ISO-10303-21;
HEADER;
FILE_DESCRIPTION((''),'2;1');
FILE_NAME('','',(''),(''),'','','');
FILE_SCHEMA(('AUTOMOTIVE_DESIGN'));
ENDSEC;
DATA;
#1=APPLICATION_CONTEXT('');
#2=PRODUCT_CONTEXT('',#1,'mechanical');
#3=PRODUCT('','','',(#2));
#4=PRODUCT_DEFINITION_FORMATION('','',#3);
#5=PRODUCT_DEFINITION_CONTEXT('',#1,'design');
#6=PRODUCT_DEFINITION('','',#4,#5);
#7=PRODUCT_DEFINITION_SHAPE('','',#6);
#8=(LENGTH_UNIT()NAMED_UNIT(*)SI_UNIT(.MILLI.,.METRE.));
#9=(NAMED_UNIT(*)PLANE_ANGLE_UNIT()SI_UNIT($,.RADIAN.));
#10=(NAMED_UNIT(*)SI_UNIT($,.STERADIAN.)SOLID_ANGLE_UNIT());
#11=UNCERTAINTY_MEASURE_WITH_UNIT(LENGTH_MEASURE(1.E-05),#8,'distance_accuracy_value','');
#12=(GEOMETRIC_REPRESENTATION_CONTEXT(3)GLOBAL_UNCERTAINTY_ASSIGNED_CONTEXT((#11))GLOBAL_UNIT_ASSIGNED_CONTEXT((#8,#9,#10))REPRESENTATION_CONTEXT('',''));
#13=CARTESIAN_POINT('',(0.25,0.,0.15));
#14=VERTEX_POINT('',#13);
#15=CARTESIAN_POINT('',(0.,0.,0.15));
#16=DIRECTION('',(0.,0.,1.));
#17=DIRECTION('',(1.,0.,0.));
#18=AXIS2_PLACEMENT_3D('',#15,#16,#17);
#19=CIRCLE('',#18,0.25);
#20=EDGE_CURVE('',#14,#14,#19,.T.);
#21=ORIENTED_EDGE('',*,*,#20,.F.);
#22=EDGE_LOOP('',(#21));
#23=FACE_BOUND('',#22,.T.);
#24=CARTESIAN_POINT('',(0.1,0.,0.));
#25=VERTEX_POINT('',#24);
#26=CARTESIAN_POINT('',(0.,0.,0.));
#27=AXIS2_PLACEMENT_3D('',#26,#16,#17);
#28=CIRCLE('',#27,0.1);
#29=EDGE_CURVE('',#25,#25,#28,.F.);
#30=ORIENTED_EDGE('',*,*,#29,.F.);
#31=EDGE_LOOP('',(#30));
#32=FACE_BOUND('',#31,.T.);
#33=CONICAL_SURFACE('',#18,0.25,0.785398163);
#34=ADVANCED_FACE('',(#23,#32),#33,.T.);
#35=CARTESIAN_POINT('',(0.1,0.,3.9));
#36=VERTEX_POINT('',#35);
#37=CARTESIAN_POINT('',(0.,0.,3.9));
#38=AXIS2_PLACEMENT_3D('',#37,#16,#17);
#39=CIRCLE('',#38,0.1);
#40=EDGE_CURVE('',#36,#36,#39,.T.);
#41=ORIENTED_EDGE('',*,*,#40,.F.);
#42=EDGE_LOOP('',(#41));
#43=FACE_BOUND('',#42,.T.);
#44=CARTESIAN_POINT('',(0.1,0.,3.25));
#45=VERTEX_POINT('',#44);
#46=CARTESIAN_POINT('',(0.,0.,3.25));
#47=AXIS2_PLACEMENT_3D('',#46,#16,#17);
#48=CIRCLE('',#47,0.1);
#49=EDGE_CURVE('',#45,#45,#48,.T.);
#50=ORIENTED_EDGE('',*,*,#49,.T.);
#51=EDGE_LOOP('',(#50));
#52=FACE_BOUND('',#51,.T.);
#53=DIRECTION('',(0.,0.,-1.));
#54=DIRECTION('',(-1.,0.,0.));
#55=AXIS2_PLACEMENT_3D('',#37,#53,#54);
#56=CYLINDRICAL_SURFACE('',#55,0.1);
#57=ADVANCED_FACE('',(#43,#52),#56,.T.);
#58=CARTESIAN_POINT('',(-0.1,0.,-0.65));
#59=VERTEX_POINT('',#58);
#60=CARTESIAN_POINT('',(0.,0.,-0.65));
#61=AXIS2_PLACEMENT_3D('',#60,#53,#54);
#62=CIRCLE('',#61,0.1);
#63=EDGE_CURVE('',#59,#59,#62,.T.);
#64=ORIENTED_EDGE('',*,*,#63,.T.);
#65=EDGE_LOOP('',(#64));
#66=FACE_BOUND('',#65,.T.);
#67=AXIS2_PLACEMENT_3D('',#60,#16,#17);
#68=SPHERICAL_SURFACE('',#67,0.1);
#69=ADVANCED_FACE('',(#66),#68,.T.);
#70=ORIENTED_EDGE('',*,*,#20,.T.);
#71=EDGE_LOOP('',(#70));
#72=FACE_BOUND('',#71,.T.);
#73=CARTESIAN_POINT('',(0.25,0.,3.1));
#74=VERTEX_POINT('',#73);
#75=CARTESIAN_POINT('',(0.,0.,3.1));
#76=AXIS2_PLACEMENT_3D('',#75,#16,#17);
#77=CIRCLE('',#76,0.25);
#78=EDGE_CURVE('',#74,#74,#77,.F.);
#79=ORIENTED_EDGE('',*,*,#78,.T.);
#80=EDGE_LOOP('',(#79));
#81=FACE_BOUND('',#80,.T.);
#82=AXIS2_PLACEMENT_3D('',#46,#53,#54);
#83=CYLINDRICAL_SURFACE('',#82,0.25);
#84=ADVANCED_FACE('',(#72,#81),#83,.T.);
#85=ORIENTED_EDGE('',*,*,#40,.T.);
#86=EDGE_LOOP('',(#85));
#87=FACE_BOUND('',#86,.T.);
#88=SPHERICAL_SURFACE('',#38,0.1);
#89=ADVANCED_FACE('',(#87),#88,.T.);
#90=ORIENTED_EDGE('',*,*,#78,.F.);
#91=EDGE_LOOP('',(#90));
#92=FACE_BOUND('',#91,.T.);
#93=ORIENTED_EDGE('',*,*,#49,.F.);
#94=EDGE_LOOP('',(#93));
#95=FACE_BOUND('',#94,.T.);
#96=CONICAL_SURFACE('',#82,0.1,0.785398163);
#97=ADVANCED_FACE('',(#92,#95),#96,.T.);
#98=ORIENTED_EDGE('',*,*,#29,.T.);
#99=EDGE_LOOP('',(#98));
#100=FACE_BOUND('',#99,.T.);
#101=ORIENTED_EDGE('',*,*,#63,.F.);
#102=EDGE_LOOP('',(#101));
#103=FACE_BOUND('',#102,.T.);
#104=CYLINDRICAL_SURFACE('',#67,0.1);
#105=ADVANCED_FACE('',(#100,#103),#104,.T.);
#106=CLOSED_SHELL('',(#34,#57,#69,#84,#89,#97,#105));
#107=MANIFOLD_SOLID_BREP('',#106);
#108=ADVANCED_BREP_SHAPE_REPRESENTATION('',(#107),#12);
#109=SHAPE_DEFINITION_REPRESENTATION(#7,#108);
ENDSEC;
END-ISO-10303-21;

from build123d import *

# Parameters (mm, degrees)
CROQUIS1_R              = 0.25
SALIENTE_EXTRUIR1_DEPTH = 3.25
CROQUIS2_R              = 0.1
SALIENTE_EXTRUIR2_DEPTH = 0.65
SALIENTE_EXTRUIR3_START = 0.65
CROQUIS3_R              = 0.1
SALIENTE_EXTRUIR3_DEPTH = 0.65
C_PULA1_FACE_RADIUS     = 0.1
C_PULA1_HEIGHT          = 0.1
CHAFL_N2_SIZE           = 0.15


# Read off the part's stored shape, not the designer's step: Cúpula2
with BuildPart() as part:
    # Croquis1 → Saliente-Extruir1 (new body)
    with BuildSketch(Plane.XY):
        Circle(CROQUIS1_R)
    extrude(amount=SALIENTE_EXTRUIR1_DEPTH)

    # Croquis2 → Saliente-Extruir2 (add)
    with BuildSketch(Plane(origin=(0, 0, 0), x_dir=(-1, 0, 0), z_dir=(0, 0, -1))):
        with Locations(Location((0, 0, 0), (0, 0, 180))):
            Circle(CROQUIS2_R)
    extrude(amount=SALIENTE_EXTRUIR2_DEPTH)

    # Croquis3 → Saliente-Extruir3 (add)
    with BuildSketch(Plane.XY.offset(3.25).offset(SALIENTE_EXTRUIR3_START)):
        Circle(CROQUIS3_R)
    extrude(amount=-SALIENTE_EXTRUIR3_DEPTH)

    # Cúpula1: an elliptical dome of height H over a round flat face of radius A is half a spheroid: the quarter ellipse of half axes A and H revolved about the face's axis
    with BuildSketch(Plane((0, 0, -0.65), x_dir=(0, -1, 0), z_dir=(1, 0, 0)), mode=Mode.PRIVATE) as c_pula1_quarter:
        Ellipse(C_PULA1_FACE_RADIUS, C_PULA1_HEIGHT)
        Rectangle(C_PULA1_FACE_RADIUS, C_PULA1_HEIGHT, align=(Align.MIN, Align.MIN), mode=Mode.INTERSECT)
    revolve(c_pula1_quarter.sketch, axis=Axis((0, 0, -0.65), (0, 0, -1)))

    # Cúpula2 outline → Cúpula2 (revolve)
    with BuildSketch(Plane.XZ):
        with BuildLine():
            Line((0, 3.9), (0.1, 3.9))
            ThreePointArc((0.1, 3.9), (0.070710678, 3.970710678), (0, 4))
            Line((0, 4), (0, 3.9))
        make_face()
    revolve(axis=Axis((0, 0, 0), (0, 0, 1)))

    # Chaflán2
    chafl_n2_edges = [part.edges().sort_by_distance(p)[0] for p in [
        (-0.25, 0, 0),
        (-0.25, 0, 3.25),
    ]]
    chamfer(chafl_n2_edges, length=CHAFL_N2_SIZE - 0.0001)  # a hair under: the kernel refuses the full size


solid = part.part
